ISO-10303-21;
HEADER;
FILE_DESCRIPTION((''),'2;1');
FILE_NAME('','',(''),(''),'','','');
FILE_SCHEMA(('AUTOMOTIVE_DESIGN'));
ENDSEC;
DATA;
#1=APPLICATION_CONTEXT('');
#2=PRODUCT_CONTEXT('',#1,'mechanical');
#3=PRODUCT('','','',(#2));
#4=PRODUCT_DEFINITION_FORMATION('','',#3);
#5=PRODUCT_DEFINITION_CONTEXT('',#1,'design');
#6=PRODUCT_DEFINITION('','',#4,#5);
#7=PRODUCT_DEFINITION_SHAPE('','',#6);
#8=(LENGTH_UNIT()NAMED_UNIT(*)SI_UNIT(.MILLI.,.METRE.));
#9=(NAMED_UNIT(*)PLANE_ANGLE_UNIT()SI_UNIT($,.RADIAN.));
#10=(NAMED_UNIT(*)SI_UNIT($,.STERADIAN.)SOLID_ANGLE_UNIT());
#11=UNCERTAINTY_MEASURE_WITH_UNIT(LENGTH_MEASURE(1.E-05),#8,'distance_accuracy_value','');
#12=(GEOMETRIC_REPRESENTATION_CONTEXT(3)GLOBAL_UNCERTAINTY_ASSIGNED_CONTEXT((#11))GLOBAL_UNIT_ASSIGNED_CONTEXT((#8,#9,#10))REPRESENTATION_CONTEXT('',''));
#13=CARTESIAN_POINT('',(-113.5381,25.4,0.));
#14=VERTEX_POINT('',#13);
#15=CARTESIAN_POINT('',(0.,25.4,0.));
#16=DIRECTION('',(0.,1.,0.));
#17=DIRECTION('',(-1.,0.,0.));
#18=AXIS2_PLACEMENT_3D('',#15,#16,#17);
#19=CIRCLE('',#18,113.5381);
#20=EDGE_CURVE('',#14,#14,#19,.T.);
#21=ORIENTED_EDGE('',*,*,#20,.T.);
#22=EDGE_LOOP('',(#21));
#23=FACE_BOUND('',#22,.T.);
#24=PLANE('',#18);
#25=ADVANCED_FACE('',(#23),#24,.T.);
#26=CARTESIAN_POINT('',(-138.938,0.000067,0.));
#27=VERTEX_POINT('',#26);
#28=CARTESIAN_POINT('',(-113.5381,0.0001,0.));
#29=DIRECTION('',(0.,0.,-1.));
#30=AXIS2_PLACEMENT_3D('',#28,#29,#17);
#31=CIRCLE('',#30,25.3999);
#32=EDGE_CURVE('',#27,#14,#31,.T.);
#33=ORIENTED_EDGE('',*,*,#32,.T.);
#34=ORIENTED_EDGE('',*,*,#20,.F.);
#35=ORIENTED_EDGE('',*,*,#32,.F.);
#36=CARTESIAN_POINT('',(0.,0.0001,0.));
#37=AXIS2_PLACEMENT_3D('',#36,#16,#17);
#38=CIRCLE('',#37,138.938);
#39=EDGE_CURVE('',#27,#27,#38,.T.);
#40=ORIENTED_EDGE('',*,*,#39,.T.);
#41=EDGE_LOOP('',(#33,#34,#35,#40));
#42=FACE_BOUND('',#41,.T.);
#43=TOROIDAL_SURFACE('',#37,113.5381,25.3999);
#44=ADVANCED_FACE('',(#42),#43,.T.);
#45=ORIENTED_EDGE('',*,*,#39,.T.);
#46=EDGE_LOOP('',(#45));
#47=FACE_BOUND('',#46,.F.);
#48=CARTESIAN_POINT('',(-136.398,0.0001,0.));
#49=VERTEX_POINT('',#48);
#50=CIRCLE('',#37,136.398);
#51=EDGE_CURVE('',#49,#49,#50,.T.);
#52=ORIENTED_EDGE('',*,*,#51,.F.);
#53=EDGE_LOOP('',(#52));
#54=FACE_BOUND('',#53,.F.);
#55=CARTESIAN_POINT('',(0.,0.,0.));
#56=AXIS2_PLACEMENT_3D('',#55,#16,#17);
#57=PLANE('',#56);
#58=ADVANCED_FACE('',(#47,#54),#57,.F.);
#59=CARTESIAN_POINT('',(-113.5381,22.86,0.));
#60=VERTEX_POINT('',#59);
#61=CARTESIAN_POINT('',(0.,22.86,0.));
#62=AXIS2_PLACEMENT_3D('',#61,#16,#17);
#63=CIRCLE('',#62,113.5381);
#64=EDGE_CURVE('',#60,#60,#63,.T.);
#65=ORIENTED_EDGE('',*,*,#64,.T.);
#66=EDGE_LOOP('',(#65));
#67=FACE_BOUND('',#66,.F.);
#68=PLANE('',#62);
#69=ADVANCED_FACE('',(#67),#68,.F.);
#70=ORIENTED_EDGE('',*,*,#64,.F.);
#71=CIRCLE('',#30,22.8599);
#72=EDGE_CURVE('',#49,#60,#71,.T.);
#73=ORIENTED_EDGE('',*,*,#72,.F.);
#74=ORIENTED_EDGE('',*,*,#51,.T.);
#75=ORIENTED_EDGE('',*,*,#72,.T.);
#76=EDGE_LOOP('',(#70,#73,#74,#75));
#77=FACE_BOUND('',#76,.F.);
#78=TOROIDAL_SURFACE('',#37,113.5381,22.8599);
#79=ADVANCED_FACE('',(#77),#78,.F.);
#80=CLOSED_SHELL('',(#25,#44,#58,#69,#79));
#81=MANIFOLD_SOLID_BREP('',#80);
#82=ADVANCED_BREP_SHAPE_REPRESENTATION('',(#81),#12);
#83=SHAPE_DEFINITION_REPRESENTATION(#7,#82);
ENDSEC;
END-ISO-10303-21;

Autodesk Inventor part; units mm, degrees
ref_plane "YZ Plane" through (0, 0, 0) normal (1, 0, 0) x (0, 1, 0)
ref_plane "XZ Plane" through (0, 0, 0) normal (0, 1, 0) x (-1, 0, 0)
ref_plane "XY Plane" through (0, 0, 0) normal (0, 0, 1) x (1, 0, 0)
sketch "Sketch1" plane through (0, 0, 0) normal (0, 1, 0) x (-1, 0, 0)
  circle A0 centre (0, 0) radius 138.938
  dimension "d0" = 277.876
extrude "Extrusion1" add sketch "Sketch1" along normal blind 25.4
fillet "Fillet1" radius 25.4 1 edges at (138.938, 25.4, 0)
shell "Shell1" thickness 2.54 removed faces 2 at (78.7519, 0.0001, -114.4636) at (28.4576, 0, -60.367)
properties part number "Frisbee" material "Water"
